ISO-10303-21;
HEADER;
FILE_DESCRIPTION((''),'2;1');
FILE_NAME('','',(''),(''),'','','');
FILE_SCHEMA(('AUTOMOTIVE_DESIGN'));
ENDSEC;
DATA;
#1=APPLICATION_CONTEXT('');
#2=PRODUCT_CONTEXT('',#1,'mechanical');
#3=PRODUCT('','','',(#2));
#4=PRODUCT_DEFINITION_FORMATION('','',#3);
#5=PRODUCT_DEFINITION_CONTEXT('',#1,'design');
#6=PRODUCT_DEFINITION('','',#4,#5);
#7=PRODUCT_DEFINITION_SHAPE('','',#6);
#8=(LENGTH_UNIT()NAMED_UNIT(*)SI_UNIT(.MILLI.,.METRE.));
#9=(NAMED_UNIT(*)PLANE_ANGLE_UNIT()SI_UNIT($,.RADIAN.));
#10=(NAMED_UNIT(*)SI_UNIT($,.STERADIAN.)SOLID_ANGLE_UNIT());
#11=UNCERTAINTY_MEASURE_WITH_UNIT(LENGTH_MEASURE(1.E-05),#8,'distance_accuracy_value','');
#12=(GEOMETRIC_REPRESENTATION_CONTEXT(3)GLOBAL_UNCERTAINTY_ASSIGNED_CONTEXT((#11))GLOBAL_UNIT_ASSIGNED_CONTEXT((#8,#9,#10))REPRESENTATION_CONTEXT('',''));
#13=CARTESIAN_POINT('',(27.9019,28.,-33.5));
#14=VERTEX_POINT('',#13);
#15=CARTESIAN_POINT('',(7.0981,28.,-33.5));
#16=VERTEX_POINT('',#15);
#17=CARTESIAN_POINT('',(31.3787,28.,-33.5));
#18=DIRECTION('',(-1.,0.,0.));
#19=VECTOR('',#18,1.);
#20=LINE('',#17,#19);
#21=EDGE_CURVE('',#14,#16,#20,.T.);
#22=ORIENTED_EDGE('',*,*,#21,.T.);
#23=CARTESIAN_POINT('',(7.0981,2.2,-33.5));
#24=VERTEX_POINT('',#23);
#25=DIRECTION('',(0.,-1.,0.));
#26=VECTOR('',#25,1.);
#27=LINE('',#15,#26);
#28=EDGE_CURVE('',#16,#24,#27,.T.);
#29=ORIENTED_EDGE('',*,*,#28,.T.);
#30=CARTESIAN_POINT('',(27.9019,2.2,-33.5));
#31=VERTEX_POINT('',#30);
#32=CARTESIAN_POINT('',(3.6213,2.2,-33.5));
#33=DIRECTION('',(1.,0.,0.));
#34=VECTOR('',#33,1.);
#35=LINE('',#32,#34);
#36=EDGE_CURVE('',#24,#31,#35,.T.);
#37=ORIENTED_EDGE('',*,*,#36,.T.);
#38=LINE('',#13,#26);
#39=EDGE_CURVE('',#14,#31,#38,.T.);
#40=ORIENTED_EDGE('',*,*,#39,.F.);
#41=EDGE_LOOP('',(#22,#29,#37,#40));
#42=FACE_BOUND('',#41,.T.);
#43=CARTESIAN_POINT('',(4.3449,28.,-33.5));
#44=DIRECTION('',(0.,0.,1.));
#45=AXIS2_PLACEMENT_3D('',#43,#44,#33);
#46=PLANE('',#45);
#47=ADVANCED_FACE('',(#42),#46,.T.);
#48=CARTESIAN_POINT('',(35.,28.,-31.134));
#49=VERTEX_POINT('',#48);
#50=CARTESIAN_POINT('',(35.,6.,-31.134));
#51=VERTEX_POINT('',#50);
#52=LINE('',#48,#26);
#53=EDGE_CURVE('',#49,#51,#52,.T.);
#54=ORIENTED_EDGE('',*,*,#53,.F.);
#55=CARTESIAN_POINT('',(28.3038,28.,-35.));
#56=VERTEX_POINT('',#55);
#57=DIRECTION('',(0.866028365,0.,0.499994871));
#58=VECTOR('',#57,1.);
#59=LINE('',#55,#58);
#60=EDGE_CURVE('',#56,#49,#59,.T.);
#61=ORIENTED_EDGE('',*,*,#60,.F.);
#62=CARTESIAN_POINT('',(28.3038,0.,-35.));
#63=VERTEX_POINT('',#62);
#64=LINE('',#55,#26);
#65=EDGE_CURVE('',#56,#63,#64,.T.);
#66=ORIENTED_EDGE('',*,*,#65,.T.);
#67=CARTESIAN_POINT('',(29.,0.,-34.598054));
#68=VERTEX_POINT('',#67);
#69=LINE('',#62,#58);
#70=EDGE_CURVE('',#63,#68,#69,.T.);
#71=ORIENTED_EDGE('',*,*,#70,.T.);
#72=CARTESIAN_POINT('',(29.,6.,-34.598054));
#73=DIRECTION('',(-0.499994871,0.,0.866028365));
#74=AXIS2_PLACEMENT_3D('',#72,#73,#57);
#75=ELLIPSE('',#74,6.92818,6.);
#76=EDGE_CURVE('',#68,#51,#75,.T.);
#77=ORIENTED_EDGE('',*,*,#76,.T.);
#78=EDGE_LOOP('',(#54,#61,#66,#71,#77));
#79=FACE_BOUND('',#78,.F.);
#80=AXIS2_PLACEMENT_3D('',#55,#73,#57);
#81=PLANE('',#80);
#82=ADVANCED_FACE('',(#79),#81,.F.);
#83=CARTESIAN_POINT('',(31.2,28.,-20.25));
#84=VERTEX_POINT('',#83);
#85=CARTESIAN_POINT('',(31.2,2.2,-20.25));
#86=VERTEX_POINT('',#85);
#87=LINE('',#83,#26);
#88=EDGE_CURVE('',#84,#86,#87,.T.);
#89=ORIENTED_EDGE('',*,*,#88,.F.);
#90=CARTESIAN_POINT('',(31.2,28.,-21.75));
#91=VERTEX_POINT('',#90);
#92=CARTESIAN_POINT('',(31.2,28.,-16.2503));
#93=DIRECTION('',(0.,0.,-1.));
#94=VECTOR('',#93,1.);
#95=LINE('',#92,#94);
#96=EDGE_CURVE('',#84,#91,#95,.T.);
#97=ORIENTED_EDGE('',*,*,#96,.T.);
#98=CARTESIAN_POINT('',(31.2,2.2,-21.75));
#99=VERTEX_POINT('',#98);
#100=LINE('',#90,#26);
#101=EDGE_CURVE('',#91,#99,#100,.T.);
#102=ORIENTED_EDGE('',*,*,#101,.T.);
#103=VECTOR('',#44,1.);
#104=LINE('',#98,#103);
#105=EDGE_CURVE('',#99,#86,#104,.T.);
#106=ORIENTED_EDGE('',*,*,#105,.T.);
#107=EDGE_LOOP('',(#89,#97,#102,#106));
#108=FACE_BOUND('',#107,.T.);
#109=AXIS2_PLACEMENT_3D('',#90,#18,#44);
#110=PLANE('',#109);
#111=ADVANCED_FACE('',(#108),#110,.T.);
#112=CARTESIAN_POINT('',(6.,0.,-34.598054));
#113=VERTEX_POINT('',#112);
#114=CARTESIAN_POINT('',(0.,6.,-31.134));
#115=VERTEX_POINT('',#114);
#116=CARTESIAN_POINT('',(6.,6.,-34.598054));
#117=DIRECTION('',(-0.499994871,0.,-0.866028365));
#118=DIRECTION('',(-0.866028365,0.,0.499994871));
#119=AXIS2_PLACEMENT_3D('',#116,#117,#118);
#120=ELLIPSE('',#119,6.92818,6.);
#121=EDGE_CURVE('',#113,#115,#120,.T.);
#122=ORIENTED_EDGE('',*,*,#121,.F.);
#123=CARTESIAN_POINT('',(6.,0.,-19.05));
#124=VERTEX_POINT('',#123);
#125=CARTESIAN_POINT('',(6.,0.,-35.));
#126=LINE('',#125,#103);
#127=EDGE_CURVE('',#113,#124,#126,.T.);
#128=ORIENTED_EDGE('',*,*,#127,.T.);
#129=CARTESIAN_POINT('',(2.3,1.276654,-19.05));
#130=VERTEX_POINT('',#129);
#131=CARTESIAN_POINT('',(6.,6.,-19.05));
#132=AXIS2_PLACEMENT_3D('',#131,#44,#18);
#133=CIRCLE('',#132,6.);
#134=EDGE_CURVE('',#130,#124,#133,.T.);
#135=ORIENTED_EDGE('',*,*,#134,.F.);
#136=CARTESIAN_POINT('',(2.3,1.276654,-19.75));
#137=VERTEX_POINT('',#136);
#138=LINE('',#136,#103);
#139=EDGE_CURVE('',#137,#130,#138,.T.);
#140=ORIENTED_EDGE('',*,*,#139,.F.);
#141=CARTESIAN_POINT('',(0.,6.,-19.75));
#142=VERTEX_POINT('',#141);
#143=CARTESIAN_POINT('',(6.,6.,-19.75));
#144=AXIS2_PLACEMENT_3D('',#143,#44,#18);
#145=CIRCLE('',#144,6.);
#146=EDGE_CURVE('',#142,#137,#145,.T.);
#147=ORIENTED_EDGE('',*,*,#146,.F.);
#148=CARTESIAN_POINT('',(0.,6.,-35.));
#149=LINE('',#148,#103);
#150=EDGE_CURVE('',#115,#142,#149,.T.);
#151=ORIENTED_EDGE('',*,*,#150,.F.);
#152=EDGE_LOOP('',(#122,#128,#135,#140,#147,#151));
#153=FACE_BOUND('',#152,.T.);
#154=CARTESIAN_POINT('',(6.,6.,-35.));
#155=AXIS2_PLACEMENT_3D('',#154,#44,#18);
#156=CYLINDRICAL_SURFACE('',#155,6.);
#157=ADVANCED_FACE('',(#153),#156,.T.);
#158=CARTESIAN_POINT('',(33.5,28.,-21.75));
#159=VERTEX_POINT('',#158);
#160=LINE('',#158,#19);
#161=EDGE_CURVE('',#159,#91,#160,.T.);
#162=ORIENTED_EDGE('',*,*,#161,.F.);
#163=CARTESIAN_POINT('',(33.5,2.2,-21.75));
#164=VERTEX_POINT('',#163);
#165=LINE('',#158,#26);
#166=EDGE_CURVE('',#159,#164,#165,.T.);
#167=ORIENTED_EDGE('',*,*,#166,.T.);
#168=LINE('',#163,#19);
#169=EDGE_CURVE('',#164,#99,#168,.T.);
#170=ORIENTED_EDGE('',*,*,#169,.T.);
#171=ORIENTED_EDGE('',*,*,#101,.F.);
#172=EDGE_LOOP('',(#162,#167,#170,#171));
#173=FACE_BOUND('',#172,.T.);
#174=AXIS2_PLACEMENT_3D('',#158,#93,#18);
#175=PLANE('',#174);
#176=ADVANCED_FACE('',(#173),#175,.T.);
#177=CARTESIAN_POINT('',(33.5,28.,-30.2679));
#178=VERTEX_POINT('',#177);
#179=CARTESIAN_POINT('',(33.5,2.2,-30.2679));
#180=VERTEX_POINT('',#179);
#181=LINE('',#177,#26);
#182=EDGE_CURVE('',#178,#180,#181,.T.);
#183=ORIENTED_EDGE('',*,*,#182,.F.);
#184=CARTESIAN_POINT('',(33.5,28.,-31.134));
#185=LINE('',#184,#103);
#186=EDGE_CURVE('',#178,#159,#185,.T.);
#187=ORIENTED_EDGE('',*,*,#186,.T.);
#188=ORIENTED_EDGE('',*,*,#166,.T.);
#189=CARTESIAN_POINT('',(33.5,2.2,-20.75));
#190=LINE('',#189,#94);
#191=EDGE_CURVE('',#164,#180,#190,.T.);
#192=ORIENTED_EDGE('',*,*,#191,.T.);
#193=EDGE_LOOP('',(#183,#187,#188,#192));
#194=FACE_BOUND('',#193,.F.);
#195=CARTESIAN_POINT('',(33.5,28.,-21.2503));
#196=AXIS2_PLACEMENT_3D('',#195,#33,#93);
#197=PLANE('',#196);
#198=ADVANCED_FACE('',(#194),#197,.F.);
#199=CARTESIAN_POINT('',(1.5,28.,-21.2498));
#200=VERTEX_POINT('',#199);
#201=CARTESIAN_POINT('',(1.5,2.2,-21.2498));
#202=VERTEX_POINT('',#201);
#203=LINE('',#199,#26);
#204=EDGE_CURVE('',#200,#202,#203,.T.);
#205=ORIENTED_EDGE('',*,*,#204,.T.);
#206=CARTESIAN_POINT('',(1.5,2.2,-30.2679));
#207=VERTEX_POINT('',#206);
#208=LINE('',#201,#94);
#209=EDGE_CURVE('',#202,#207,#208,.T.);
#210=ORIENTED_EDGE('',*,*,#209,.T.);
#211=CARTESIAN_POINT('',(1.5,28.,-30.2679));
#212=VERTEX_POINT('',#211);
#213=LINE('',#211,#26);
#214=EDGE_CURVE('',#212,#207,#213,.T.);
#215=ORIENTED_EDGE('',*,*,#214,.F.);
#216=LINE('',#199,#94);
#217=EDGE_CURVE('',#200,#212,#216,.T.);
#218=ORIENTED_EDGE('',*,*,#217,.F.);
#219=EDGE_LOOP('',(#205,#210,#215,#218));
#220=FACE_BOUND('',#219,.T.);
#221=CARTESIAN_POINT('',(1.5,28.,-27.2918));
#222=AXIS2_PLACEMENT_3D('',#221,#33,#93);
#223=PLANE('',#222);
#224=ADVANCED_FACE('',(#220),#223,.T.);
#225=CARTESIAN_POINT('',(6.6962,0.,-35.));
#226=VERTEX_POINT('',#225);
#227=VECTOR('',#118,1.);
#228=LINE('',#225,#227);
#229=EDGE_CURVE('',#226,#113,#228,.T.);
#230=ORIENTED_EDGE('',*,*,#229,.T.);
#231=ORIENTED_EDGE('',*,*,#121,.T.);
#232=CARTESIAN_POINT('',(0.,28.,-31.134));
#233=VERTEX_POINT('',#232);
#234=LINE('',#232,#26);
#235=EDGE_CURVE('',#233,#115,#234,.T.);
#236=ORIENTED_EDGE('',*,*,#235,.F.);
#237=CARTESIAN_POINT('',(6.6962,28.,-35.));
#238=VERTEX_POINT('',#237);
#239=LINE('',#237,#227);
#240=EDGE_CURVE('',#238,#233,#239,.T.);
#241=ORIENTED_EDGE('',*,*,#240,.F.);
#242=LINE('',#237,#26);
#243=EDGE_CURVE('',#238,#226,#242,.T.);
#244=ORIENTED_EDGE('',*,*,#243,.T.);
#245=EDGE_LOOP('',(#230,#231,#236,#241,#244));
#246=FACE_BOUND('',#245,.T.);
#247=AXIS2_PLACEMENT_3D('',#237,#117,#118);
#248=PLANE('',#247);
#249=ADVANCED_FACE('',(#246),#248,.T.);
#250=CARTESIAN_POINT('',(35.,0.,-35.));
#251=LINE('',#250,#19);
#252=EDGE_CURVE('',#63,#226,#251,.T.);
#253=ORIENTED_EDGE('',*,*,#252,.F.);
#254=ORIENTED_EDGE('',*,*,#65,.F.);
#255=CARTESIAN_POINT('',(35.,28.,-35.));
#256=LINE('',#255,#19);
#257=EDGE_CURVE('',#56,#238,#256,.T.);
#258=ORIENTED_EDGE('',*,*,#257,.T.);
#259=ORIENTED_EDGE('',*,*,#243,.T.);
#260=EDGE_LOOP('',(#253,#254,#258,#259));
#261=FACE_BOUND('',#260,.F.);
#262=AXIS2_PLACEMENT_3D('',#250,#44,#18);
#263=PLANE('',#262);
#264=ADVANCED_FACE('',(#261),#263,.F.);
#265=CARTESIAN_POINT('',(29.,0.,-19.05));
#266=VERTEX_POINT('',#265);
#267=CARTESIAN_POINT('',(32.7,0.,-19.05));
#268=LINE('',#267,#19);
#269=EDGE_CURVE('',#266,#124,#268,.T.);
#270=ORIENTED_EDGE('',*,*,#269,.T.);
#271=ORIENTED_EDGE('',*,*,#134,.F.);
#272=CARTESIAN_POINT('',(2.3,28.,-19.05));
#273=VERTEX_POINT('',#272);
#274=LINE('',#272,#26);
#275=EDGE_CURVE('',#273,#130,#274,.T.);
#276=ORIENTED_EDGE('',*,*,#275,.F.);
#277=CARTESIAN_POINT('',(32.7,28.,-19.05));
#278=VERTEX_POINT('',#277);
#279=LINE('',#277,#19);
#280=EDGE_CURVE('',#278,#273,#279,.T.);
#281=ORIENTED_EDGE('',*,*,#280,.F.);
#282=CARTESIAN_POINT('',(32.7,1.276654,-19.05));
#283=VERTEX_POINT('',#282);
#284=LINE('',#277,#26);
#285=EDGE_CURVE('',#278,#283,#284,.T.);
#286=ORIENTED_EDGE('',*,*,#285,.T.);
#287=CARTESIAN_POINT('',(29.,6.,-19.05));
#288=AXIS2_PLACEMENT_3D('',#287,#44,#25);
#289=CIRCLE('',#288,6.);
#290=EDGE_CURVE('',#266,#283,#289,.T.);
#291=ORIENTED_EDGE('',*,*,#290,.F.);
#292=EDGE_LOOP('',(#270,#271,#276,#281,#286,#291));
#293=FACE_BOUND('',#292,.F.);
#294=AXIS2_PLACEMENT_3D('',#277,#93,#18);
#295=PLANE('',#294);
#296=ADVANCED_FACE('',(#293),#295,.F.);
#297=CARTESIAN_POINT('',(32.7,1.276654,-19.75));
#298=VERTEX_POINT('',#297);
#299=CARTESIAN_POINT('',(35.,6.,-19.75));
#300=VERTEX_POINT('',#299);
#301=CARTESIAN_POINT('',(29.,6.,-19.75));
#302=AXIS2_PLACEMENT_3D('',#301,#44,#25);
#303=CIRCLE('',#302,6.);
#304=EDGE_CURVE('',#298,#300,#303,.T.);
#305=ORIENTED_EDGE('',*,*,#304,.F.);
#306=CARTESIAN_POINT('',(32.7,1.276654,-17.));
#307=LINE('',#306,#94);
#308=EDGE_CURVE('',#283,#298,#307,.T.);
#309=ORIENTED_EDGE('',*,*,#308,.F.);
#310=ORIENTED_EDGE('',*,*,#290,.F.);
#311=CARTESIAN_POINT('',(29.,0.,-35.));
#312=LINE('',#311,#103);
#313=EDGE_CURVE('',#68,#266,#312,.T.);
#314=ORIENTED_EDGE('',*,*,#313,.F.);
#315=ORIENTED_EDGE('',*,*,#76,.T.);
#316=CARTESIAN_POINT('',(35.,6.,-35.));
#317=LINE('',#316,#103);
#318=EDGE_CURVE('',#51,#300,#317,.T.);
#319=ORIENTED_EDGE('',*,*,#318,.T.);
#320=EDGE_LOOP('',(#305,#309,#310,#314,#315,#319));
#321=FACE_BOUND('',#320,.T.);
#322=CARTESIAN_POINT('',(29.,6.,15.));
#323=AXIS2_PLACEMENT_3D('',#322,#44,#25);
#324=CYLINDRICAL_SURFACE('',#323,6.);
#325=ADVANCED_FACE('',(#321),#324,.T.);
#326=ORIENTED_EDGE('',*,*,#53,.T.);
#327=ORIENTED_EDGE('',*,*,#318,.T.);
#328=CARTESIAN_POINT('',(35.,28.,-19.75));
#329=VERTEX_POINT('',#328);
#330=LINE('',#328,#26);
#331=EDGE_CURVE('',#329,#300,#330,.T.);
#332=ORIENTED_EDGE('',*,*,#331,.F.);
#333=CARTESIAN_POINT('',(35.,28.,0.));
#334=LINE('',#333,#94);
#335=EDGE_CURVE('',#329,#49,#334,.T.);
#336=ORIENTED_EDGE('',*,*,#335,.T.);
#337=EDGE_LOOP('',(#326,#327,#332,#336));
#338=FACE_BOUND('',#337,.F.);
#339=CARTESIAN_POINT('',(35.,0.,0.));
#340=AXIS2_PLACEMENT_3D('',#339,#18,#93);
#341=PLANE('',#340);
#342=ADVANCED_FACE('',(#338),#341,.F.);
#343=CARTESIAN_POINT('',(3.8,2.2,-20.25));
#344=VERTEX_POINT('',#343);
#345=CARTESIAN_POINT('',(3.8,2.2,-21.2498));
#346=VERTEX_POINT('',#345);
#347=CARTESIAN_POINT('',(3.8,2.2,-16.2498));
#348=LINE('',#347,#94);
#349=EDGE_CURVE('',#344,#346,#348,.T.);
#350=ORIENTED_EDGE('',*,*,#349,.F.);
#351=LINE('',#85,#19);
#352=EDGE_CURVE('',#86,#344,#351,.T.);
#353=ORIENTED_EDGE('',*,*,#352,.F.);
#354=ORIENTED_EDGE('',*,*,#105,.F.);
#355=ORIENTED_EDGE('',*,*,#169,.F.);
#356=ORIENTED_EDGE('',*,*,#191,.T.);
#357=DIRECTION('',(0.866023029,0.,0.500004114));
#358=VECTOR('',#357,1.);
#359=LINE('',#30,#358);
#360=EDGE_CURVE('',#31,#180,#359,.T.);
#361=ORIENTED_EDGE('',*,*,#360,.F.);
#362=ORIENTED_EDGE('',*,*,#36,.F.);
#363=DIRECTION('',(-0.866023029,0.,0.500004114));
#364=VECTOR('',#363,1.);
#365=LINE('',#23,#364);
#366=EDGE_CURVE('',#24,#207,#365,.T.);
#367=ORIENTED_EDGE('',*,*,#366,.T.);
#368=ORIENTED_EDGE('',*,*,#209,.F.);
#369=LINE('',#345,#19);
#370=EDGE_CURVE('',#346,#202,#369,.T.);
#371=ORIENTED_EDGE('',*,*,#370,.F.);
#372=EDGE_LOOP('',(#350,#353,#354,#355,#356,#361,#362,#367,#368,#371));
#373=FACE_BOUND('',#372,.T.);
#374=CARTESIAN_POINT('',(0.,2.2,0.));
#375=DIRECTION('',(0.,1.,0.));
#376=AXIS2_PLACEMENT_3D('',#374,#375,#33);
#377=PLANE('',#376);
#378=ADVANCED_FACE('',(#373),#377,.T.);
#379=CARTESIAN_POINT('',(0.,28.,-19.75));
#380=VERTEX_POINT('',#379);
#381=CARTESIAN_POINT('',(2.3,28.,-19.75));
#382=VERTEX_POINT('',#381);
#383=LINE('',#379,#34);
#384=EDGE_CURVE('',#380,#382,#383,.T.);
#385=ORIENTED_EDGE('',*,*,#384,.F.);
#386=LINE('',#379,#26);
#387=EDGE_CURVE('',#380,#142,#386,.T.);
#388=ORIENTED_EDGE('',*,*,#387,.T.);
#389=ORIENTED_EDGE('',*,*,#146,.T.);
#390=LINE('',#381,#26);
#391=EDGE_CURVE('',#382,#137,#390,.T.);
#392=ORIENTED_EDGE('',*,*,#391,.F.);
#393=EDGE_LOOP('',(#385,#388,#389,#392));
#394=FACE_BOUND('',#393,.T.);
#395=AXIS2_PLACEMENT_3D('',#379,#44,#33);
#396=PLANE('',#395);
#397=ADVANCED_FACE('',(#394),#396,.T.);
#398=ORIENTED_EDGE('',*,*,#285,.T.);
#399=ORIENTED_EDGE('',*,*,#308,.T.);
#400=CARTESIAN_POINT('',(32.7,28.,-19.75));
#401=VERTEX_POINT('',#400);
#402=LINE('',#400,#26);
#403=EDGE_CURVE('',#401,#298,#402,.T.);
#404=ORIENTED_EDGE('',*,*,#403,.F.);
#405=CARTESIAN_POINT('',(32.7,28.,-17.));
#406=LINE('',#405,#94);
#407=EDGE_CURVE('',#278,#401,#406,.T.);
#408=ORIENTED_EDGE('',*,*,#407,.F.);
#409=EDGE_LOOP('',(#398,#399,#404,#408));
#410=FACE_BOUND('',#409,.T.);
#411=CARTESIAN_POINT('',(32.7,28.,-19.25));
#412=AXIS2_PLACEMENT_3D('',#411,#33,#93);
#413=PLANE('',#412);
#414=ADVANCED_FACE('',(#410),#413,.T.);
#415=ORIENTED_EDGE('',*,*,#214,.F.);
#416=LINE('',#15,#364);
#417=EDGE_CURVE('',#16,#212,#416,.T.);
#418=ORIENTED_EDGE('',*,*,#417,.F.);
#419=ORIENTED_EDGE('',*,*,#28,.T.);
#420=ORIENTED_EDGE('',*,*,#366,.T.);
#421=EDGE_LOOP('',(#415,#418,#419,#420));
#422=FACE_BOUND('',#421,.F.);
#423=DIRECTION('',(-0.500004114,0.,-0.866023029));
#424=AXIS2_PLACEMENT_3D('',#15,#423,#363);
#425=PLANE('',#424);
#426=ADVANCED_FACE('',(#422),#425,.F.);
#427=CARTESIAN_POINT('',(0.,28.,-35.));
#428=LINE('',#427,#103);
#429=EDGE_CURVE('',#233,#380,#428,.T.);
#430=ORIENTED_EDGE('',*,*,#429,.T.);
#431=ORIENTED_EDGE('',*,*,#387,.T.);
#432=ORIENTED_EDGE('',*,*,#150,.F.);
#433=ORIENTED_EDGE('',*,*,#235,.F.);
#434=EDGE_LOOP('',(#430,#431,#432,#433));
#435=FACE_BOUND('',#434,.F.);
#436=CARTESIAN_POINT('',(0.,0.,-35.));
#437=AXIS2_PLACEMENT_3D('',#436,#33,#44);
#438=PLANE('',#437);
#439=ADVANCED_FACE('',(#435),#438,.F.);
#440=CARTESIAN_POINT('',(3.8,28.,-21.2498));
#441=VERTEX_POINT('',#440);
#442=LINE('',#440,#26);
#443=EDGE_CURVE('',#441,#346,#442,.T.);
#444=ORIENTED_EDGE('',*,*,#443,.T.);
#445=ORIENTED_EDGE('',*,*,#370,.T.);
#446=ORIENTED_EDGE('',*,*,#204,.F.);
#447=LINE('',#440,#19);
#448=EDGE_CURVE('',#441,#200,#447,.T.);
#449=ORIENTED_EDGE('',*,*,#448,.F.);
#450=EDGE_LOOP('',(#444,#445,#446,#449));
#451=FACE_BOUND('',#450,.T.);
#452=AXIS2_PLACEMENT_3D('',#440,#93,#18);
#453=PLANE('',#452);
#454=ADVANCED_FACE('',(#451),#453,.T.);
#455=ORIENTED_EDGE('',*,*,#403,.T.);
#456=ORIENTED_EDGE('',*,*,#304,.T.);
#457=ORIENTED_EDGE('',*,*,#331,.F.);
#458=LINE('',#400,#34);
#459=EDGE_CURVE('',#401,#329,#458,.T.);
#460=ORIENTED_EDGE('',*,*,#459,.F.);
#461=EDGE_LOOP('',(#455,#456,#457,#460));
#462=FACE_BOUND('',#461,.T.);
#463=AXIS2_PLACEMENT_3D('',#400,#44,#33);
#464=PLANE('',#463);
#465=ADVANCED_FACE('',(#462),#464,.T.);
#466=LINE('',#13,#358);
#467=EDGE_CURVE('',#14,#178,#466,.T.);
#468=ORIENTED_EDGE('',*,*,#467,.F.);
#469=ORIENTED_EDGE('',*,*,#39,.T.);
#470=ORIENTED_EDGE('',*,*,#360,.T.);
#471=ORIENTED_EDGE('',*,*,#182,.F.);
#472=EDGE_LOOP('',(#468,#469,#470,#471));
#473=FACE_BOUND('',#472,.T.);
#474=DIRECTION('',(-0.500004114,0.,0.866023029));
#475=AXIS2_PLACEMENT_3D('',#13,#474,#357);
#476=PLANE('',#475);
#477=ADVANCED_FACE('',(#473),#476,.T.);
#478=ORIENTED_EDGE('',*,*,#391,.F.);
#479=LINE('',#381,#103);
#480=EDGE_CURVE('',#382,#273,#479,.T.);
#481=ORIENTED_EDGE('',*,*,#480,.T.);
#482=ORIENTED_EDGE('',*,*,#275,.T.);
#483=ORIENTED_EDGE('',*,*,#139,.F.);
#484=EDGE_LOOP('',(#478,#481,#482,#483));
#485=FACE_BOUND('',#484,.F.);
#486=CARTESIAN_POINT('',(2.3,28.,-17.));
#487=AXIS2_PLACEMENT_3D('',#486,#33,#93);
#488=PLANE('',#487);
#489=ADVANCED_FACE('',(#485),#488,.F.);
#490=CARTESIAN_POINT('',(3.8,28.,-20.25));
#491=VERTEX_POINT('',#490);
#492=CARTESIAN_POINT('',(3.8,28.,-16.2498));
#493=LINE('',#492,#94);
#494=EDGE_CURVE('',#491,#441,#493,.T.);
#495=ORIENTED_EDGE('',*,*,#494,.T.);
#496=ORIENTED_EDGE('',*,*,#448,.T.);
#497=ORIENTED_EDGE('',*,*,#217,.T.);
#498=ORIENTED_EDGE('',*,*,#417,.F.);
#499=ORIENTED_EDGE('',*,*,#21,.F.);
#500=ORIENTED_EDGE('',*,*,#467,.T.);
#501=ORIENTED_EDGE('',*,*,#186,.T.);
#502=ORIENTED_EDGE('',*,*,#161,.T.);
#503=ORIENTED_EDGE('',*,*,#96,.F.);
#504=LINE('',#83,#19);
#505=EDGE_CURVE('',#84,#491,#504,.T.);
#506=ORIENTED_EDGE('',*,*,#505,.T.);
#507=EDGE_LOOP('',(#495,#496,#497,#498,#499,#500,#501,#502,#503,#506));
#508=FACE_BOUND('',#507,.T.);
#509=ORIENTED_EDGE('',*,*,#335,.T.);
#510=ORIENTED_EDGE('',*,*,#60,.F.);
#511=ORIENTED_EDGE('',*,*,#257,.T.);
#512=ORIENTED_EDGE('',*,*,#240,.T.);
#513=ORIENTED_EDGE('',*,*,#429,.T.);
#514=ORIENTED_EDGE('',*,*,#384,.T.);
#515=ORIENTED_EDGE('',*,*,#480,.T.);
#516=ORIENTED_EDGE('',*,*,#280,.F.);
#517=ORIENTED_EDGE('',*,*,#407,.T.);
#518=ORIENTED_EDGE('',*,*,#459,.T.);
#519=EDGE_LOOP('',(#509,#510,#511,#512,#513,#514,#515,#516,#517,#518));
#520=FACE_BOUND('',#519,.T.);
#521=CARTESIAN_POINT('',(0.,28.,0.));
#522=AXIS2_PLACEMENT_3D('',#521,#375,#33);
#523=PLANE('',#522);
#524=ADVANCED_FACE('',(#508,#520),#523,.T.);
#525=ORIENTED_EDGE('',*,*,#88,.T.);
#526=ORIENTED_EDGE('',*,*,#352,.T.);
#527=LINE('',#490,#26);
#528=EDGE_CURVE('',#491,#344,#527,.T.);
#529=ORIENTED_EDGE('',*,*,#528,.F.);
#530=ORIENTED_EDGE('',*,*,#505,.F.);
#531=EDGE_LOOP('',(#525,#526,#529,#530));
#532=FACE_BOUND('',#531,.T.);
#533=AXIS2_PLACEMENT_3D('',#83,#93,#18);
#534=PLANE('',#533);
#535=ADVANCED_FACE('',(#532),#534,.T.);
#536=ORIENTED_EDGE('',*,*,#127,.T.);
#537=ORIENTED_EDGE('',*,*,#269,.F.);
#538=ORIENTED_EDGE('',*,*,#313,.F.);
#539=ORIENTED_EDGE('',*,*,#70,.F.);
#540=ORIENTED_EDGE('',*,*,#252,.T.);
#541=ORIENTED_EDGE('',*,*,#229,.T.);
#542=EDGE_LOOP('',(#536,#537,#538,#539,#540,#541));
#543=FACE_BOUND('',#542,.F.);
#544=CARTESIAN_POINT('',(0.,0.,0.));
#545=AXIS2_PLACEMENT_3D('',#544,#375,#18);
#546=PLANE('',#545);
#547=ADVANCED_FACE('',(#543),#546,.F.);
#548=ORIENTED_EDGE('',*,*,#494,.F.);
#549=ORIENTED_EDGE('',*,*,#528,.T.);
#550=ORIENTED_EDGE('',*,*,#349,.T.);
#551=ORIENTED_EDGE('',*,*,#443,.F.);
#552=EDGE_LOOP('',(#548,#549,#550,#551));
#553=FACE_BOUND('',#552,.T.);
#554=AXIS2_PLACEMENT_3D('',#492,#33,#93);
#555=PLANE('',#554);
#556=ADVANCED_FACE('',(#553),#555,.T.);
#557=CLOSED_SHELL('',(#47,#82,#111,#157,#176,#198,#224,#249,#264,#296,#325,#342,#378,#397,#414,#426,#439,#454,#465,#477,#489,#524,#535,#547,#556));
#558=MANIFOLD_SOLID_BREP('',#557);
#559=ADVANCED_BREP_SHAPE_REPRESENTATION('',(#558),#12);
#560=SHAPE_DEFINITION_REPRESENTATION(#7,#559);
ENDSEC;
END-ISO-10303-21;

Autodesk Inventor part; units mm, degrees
ref_plane "YZ Plane" through (0, 0, 0) normal (1, 0, 0) x (0, 1, 0)
ref_plane "XZ Plane" through (0, 0, 0) normal (0, 1, 0) x (-1, 0, 0)
ref_plane "XY Plane" through (0, 0, 0) normal (0, 0, 1) x (1, 0, 0)
sketch "Sketch1" plane through (0, 0, 0) normal (0, 1, 0) x (-1, 0, 0)
  line L0 (0, 0) -> (-35, 0)
  line L1 (-35, 0) -> (-35, -35)
  line L2 (-35, -35) -> (0, -35)
  line L3 (0, -35) -> (0, 0)
  dimension "d0" = 35
  dimension "d1" = 35
extrude "Extrusion1" add sketch "Sketch1" along normal blind 28
sketch "Sketch2" plane through (0, 28, 0) normal (0, 1, 0) x (1, 0, 0)
  line L0 (35, 19) -> (32.7, 19)
  line L1 (32.7, 19) -> (32.7, 17)
  line L2 (35, 19) -> (35, 17.125)
  line L3 (32.7, 17) -> (35, 17)
  line L4 (35, 17) -> (35, 17.125)
  point P0 (0, 0)
  point P1 (35, 35)
  dimension "d6" = 16
  dimension "d7" = 2.3
  dimension "d8" = 2
extrude "Extrusion2" cut sketch "Sketch2" against normal blind 28
pattern_linear "Rectangular Pattern1" count 2 spacing 32.7 along (-1, 0, 0) of "Extrusion2"
fillet "Fillet1" radius 6 2 edges at (35, 0, -8.5) (35, 0, -27)
fillet "Fillet2" radius 6 1 edges at (0, 0, -27)
sketch "Sketch3" plane through (0, 28, 0) normal (0, 1, 0) x (1, 0, 0)
  line L0 (6, 0) -> (0, 0) projected
  line L1 (0, 0) -> (0, 3)
  line L2 (0, 17) -> (0, 0) projected
  line L3 (0, 0) -> (3, 0)
  line L4 (0, 3) -> (3, 0)
  dimension "d16" = 3
extrude "Extrusion3" cut sketch "Sketch3" against normal blind 28
sketch "Sketch4" plane through (0, 28, 0) normal (0, 1, 0) x (1, 0, 0)
  line L0 (0, 19) -> (0, 35) projected
  line L1 (0, 35) -> (0, 32)
  line L2 (0, 35) -> (6, 35) projected
  line L3 (0, 35) -> (3, 35)
  line L4 (3, 35) -> (0, 32)
  point P0 (0, 0)
  dimension "d19" = 3
  dimension "d20" = 3
extrude "Extrusion4" cut sketch "Sketch4" against normal blind 28
sketch "Sketch5" plane through (0, 28, 0) normal (0, 1, 0) x (1, 0, 0)
  line L0 (35, 0) -> (35, 17) projected
  line L1 (35, 0) -> (32, 0)
  line L2 (3, 0) -> (35, 0) projected
  line L3 (35, 0) -> (35, 3)
  line L4 (35, 3) -> (32, 0)
  line L5 (29, 35) -> (35, 35) projected
  line L6 (35, 35) -> (35, 32)
  line L7 (35, 19) -> (35, 35) projected
  line L8 (35, 32) -> (32, 35)
  line L9 (32, 35) -> (35, 35)
  point P0 (0, 0)
  dimension "d23" = 3
  dimension "d24" = 3
  dimension "d25" = 3
extrude "Extrusion5" cut sketch "Sketch5" against normal blind 28
sketch "Sketch6" plane through (0, 28, 0) normal (0, 1, 0) x (1, 0, 0)
  line L0 (3, 0) -> (0, 3) projected
  line L1 (2.3, 17) -> (0, 17) projected
  line L2 (2, 15.75) -> (4.3, 15.75)
  line L3 (4.3, 15.75) -> (4.3, 21.75)
  line L4 (4.3, 21.75) -> (2, 21.75)
  line L5 (0, 19) -> (0, 32) projected
  line L6 (2, 21.75) -> (2, 30.75)
  line L7 (0, 3) -> (0, 5)
  line L8 (0, 17) -> (0, 3) projected
  line L9 (2, 5) -> (2, 15.75)
  line L10 (32, 35) -> (3, 35) projected
  line L11 (3, 35) -> (5, 35)
  line L12 (6, 0) -> (3, 0) projected
  line L13 (3, 0) -> (5, 0)
  line L14 (2.827, 3) -> (2, 3.8818)
  line L15 (2, 3.8818) -> (2, 5)
  line L16 (2.827, 3) -> (3.827, 2)
  line L17 (2.827, 3) -> (4.2412, 3) construction
  line L18 (1.743, 34.4232) -> (3.15, 33.0019)
  line L19 (3.15, 33.0019) -> (2, 31.8635)
  line L20 (2, 31.8635) -> (2, 30.75)
  line L21 (3.15, 33.0019) -> (4.0351, 33.5429)
  line L22 (4.0351, 33.5429) -> (30.1293, 33.5429)
  line L23 (35, 32) -> (32, 35) projected
  line L24 (32.0858, 32.8358) -> (31.3787, 33.5429)
  line L25 (31.3787, 33.5429) -> (30.1293, 33.5429)
  line L26 (35, 19) -> (35, 32) projected
  line L27 (33, 26.25) -> (33, 31.9216)
  line L28 (33, 31.9216) -> (32.0858, 32.8358)
  line L29 (33, 26.25) -> (33, 21.75)
  line L30 (35, 19) -> (32.7, 19) projected
  line L31 (33, 21.75) -> (30.7, 21.75)
  line L32 (30.7, 21.75) -> (30.7, 15.75)
  line L33 (30.7, 15.75) -> (33, 15.75)
  line L34 (33, 15.75) -> (33, 7.3052)
  line L35 (32, 0) -> (35, 3) projected
  line L36 (33.85, 1.85) -> (35.85, 1.85) construction
  line L37 (32.4358, 3.2642) -> (33, 3.8284)
  line L38 (33, 3.8284) -> (33, 7.3052)
  line L39 (27.667, 2) -> (31.1716, 2)
  line L40 (31.1716, 2) -> (32.4358, 3.2642)
  line L41 (27.667, 2) -> (3.827, 2)
  point P0 (0, 0)
  dimension "d31" = 2.3
  dimension "d32" = 6
  dimension "d33" = 2.3
  dimension "d34" = 9
  dimension "d35" = 2
  dimension "d36" = 2
  dimension "d37" = 2
  dimension "d42" = 45
  dimension "d43" = 2
  dimension "d48" = 4.5
  dimension "d49" = 2.3
  dimension "d50" = 6
  dimension "d51" = 2.3
  dimension "d52" = 2
extrude "Extrusion6" cut sketch "Sketch6" against normal blind 25.8
sketch "Sketch7" plane through (0, 28, 0) normal (0, 1, 0) x (1, 0, 0)
  line L0 (23.4542, 2) -> (23.9542, 2) construction
  line L1 (32.0858, 2.9142) -> (32.5858, 2.9142) construction
  line L2 (35, 32) -> (32, 35) projected
  line L3 (31.3787, 33.5429) -> (33, 31.9216) projected
  line L4 (2, 31.8635) -> (3.15, 33.0019) projected
  line L5 (2.8776, 32.7322) -> (3.3776, 32.7322) construction
  line L6 (32.4393, 2.5607) -> (31.3787, 1.5)
  line L7 (31.3787, 1.5) -> (23.4542, 1.5)
  line L8 (2.7741, 2.5108) -> (3.7848, 1.5)
  line L9 (3.7848, 1.5) -> (23.4542, 1.5)
  line L10 (2.7741, 2.5108) -> (1.5, 3.7848)
  line L11 (1.5, 3.7848) -> (1.5, 16.2498)
  line L12 (1.5, 16.2498) -> (3.8, 16.2498)
  line L13 (3.8, 16.2498) -> (3.8, 21.2498)
  line L14 (4.3, 21.75) -> (2, 21.75) projected
  line L15 (3.8, 21.2498) -> (1.5, 21.2498)
  line L16 (1.5, 21.2498) -> (1.5, 27.2918)
  line L17 (1.5, 27.2918) -> (1.5, 32.0617)
  line L18 (1.5, 32.0617) -> (2.5241, 33.0858)
  line L19 (2.5241, 33.0858) -> (3.4812, 34.0429)
  line L20 (3.4812, 34.0429) -> (18.3245, 34.0429)
  line L21 (18.3245, 34.0429) -> (31.5858, 34.0429)
  line L22 (31.5858, 34.0429) -> (32.5429, 33.0858)
  line L23 (32.4393, 2.5607) -> (33.5, 3.6213)
  line L24 (33.5, 3.6213) -> (33.5, 11.0333)
  line L25 (33.5, 11.0333) -> (33.5, 16.2503)
  line L26 (33.5, 16.2503) -> (31.2, 16.2503)
  line L27 (30.7, 21.75) -> (30.7, 15.75) projected
  line L28 (31.2, 16.2503) -> (31.2, 21.2503)
  line L29 (31.2, 21.2503) -> (33.5, 21.2503)
  line L30 (33.5, 21.2503) -> (33.5, 32.1287)
  line L31 (33.5, 32.1287) -> (32.5429, 33.0858)
  line L32 (4.0351, 33.5429) -> (31.3787, 33.5429) projected
  line L33 (4.0351, 33.5429) -> (31.3787, 33.5429)
  line L34 (33, 31.9216) -> (33, 21.75) projected
  line L35 (31.3787, 33.5429) -> (33, 31.9216)
  line L36 (33, 31.9216) -> (33, 21.75)
  line L37 (33, 21.75) -> (30.7, 21.75) projected
  line L38 (33, 21.75) -> (30.7, 21.75)
  line L39 (30.7, 21.75) -> (30.7, 15.75)
  line L40 (30.7, 15.75) -> (33, 15.75) projected
  line L41 (31.1716, 2) -> (3.827, 2)
  line L42 (3.827, 2) -> (2.827, 3) projected
  line L43 (2, 3.8818) -> (2, 15.75) projected
  line L44 (3.827, 2) -> (2, 3.8818)
  line L45 (2, 3.8818) -> (2, 15.75)
  line L46 (2, 15.75) -> (4.3, 15.75) projected
  line L47 (2, 15.75) -> (4.3, 15.75)
  line L48 (4.3, 15.75) -> (4.3, 21.75) projected
  line L49 (4.3, 15.75) -> (4.3, 21.75)
  line L50 (4.3, 21.75) -> (2, 21.75)
  line L51 (2, 21.75) -> (2, 31.8635) projected
  line L52 (2, 21.75) -> (2, 31.8635)
  line L53 (3.15, 33.0019) -> (4.0351, 33.5429) projected
  line L54 (2, 31.8635) -> (3.15, 33.0019)
  line L55 (33, 3.8284) -> (31.1716, 2) projected
  line L56 (31.1716, 2) -> (33, 3.8284)
  line L57 (33, 3.8284) -> (33, 15.75)
  line L58 (30.7, 15.75) -> (33, 15.75)
  point P0 (0, 0)
  dimension "d65" = 0.5
  dimension "d70" = 12.465
  dimension "d71" = 2.3
  dimension "d72" = 5
  dimension "d73" = 90
  dimension "d74" = 2.3
  dimension "d76" = 2.3
  dimension "d77" = 5
  dimension "d78" = 2.3
extrude "Extrusion7" cut sketch "Sketch7" against normal blind 25.8
sketch "Sketch8" plane through (0, 28, 0) normal (0, 1, 0) x (1, 0, 0)
  line L0 (32, 35) -> (35, 32) projected
  line L1 (33.2498, 33.7502) -> (34.7498, 33.7502) construction
  line L2 (29, 35) -> (32, 35) projected
  line L3 (28.3787, 33.5) -> (31.3787, 33.5)
  line L4 (31.3787, 33.5) -> (32.1892, 32.6895)
  line L5 (33.5, 32.1287) -> (33.5, 21.2503) projected
  line L6 (33.5, 31.3787) -> (32.1892, 32.6895)
  line L7 (33.5, 31.3787) -> (33.5, 32.1287)
  line L8 (31.5858, 34.0429) -> (33.5, 32.1287) projected
  line L9 (33.5, 32.1287) -> (31.5858, 34.0429)
  line L10 (3.4812, 34.0429) -> (31.5858, 34.0429) projected
  line L11 (31.5858, 34.0429) -> (3.4812, 34.0429)
  line L12 (1.5, 32.0617) -> (3.4812, 34.0429) projected
  line L13 (3.4812, 34.0429) -> (1.5, 32.0617)
  line L14 (3, 35) -> (0, 32) projected
  line L15 (1.7099, 33.7099) -> (3.2099, 33.7099) construction
  line L16 (2.7705, 32.6492) -> (1.5, 31.3787)
  line L17 (1.5, 21.2498) -> (1.5, 32.0617) projected
  line L18 (4.3449, 35) -> (5.8449, 35) construction
  line L19 (4.3449, 33.5) -> (3.6213, 33.5)
  line L20 (3.6213, 33.5) -> (2.7705, 32.6492)
  line L21 (1.5, 31.3787) -> (1.5, 32.0617)
  line L22 (4.3449, 33.5) -> (28.3787, 33.5)
  point P0 (0, 0)
  dimension "d83" = 1.5
  dimension "d87" = 1.5
  dimension "d89" = 1.5
extrude "Extrusion8" add sketch "Sketch8" against normal blind 25.8
sketch "Sketch9" plane through (0, 28, 0) normal (0, 1, 0) x (1, 0, 0)
  line L0 (0, 3) -> (3, 0) projected
  line L1 (0, 3) -> (5.1962, 0)
  line L2 (3, 0) -> (32, 0) projected
  line L3 (0, 3) -> (6, 3) construction
  line L4 (5.1962, 0) -> (3, 0)
  line L5 (3, 0) -> (0, 3)
  line L6 (35, 17) -> (35, 3) projected
  line L7 (35, 3) -> (29.8038, 0)
  line L8 (32, 0) -> (29, 0) projected
  line L9 (35, 3) -> (41, 3) construction
  line L10 (29.8038, 0) -> (32, 0)
  line L11 (32, 0) -> (35, 3)
  line L12 (35, 19) -> (35, 32) projected
  line L13 (35, 32) -> (29.8038, 35)
  line L14 (29, 35) -> (32, 35) projected
  line L15 (35, 32) -> (41, 32) construction
  line L16 (29.8038, 35) -> (32, 35)
  line L17 (32, 35) -> (35, 32)
  line L18 (0, 19) -> (0, 32) projected
  line L19 (0, 32) -> (5.1962, 35)
  line L20 (3, 35) -> (6, 35) projected
  line L21 (0, 32) -> (6, 32) construction
  line L22 (5.1962, 35) -> (3, 35)
  line L23 (3, 35) -> (0, 32)
  line L24 (0, 32) -> (3, 35) projected
  point P0 (0, 0)
  dimension "d93" = 30
  dimension "d94" = 150
  dimension "d95" = 150
  dimension "d96" = 30
extrude "Extrusion9" cut sketch "Sketch9" against normal blind 28
sketch "Sketch10" plane through (0, 28, 0) normal (0, 1, 0) x (1, 0, 0)
  line L0 (1.5, 3.7848) -> (1.5, 16.2498) projected
  line L1 (1.5, 3.7848) -> (5.4575, 1.5)
  line L2 (31.3787, 1.5) -> (3.7848, 1.5) projected
  line L3 (1.5, 3.7848) -> (6.0697, 3.7848) construction
  line L4 (5.4575, 1.5) -> (3.7848, 1.5)
  line L5 (3.7848, 1.5) -> (1.5, 3.7848) projected
  line L6 (3.7848, 1.5) -> (1.5, 3.7848)
  line L7 (33.5, 16.2503) -> (33.5, 3.6213) projected
  line L8 (33.5, 3.6213) -> (29.8258, 1.5)
  line L9 (33.5, 3.6213) -> (37.7426, 3.6213) construction
  line L10 (33.5, 3.6213) -> (31.3787, 1.5) projected
  line L11 (29.8258, 1.5) -> (31.3787, 1.5)
  line L12 (31.3787, 1.5) -> (33.5, 3.6213)
  line L13 (33.5, 31.3787) -> (33.5, 21.2503) projected
  line L14 (33.5, 31.3787) -> (29.8258, 33.5)
  line L15 (3.6213, 33.5) -> (31.3787, 33.5) projected
  line L16 (33.5, 31.3787) -> (37.7426, 31.3787) construction
  line L17 (29.8258, 33.5) -> (31.3787, 33.5)
  line L18 (31.3787, 33.5) -> (33.5, 31.3787)
  line L19 (1.5, 31.3787) -> (3.6213, 33.5) projected
  line L20 (1.5, 31.3787) -> (5.1742, 33.5)
  line L21 (1.5, 31.3787) -> (5.7426, 31.3787) construction
  line L22 (5.1742, 33.5) -> (3.6213, 33.5)
  line L23 (3.6213, 33.5) -> (1.5, 31.3787)
  point P0 (0, 0)
  dimension "d99" = 30
  dimension "d100" = 150
  dimension "d101" = 150
  dimension "d102" = 30
extrude "Extrusion10" add sketch "Sketch10" against normal blind 25.8
sketch "Sketch11" plane through (0, 28, 0) normal (0, 1, 0) x (1, 0, 0)
  line L0 (0, 3) -> (5.1962, 0) projected
  line L1 (3.036, 1.2472) -> (4.536, 1.2472) construction
  line L2 (3.786, 2.5462) -> (1.5, 3.866)
  line L3 (1.5, 3.7848) -> (5.4575, 1.5) projected
  line L4 (1.5, 3.866) -> (1.5, 3.7848)
  line L5 (1.5, 3.7848) -> (5.4575, 1.5)
  line L6 (5.4575, 1.5) -> (5.5981, 1.5)
  line L7 (29.8258, 1.5) -> (5.4575, 1.5) projected
  line L8 (5.5981, 1.5) -> (3.786, 2.5462)
  line L9 (29.5815, 1.5) -> (29.8258, 1.5)
  line L10 (33.5, 3.6213) -> (29.8258, 1.5) projected
  line L11 (29.8258, 1.5) -> (33.5, 3.6213)
  line L12 (29.8038, 0) -> (35, 3) projected
  line L13 (32.0253, 1.2826) -> (33.5253, 1.2826) construction
  line L14 (31.2753, 2.5816) -> (33.5, 3.866)
  line L15 (33.5, 16.2503) -> (33.5, 3.6213) projected
  line L16 (33.5, 3.866) -> (33.5, 3.6213)
  line L17 (31.2753, 2.5816) -> (29.4019, 1.5)
  line L18 (29.5815, 1.5) -> (29.4019, 1.5)
  line L19 (29.8038, 35) -> (35, 32) projected
  line L20 (29.8258, 33.5) -> (33.5, 31.3787) projected
  line L21 (32.0253, 33.7174) -> (33.5253, 33.7174) construction
  line L22 (31.2753, 32.4184) -> (29.4019, 33.5)
  line L23 (29.8258, 33.5) -> (5.1742, 33.5) projected
  line L24 (29.8258, 33.5) -> (29.4019, 33.5)
  line L25 (29.8258, 33.5) -> (33.5, 31.3787)
  line L26 (33.5, 31.3787) -> (33.5, 31.134)
  line L27 (33.5, 31.3787) -> (33.5, 21.2503) projected
  line L28 (31.2753, 32.4184) -> (33.5, 31.134)
  line L29 (5.1962, 35) -> (0, 32) projected
  line L30 (2.5981, 33.5) -> (4.0981, 33.5) construction
  line L31 (3.3481, 32.201) -> (1.606, 31.1952)
  line L32 (1.5, 21.2498) -> (1.5, 31.3787) projected
  line L33 (5.1742, 33.5) -> (1.5, 31.3787) projected
  line L34 (1.5, 31.3787) -> (5.1742, 33.5)
  line L35 (5.1742, 33.5) -> (5.5981, 33.5)
  line L36 (3.3481, 32.201) -> (5.5981, 33.5)
  line L37 (1.606, 31.1952) -> (1.5, 31.134)
  line L38 (1.5, 31.3787) -> (1.5, 31.134)
  point P0 (0, 0)
  dimension "d105" = 1.5
  dimension "d109" = 1.5
  dimension "d111" = 1.5
  dimension "d113" = 1.5
extrude "Extrusion11" add sketch "Sketch11" against normal blind 25.8
sketch "Sketch12" plane through (0, 28, 0) normal (0, 1, 0) x (1, 0, 0)
  line L0 (32.7, 19) -> (32.95, 19) construction
  line L1 (35, 19) -> (35, 32) projected
  line L2 (32.7, 19) -> (32.7, 17) projected
  line L3 (32.7, 19.25) -> (34.2, 19.25) construction
  line L4 (32.7, 20.75) -> (31.2, 20.75)
  line L5 (31.2, 21.2503) -> (31.2, 16.2503) projected
  line L6 (33.5, 21.2503) -> (31.2, 21.2503) projected
  line L7 (31.2, 21.2503) -> (31.2, 20.75)
  line L8 (33.5, 31.134) -> (33.5, 21.2503) projected
  line L9 (31.2, 21.2503) -> (33.5, 21.2503)
  line L10 (33.5, 21.2503) -> (33.5, 20.75)
  line L11 (33.5, 20.75) -> (32.7, 20.75)
  point P0 (0, 0)
  dimension "d117" = 0.25
  dimension "d119" = 1.5
extrude "Extrusion12" cut sketch "Sketch12" against normal blind 25.8
sketch "Sketch13" plane through (0, 28, 0) normal (0, 1, 0) x (1, 0, 0)
  line L0 (32.7, 19) -> (35, 19) projected
  line L1 (32.7, 19) -> (32.7, 19.25)
  line L2 (32.7, 19.25) -> (35, 19.25)
  line L3 (35, 19.25) -> (35, 19)
  line L4 (32.7, 17) -> (32.7, 19) projected
  line L5 (35, 19) -> (32.7, 19)
  point P0 (0, 0)
  dimension "d123" = 0.25
extrude "Extrusion13" cut sketch "Sketch13" against normal blind 28
sketch "Sketch14" plane through (0, 28, 0) normal (0, 1, 0) x (1, 0, 0)
  line L0 (32.7, 19.25) -> (35, 19.25) projected
  line L1 (32.7, 19.25) -> (32.7, 19.75)
  line L2 (32.7, 19.75) -> (35, 19.75)
  line L3 (35, 19.25) -> (35, 32) projected
  line L4 (35, 19.75) -> (35, 19.25)
  line L5 (32.7, 17) -> (32.7, 19.25) projected
  line L6 (35, 19.25) -> (32.7, 19.25)
  line L7 (0, 19) -> (2.3, 19) projected
  line L8 (0, 19) -> (0, 19.75)
  line L9 (0, 32) -> (0, 19) projected
  line L10 (0, 19.75) -> (2.3, 19.75)
  line L11 (2.3, 19) -> (2.3, 17) projected
  line L12 (2.3, 19.75) -> (2.3, 19)
  line L13 (2.3, 19) -> (0, 19)
  point P0 (0, 0)
  dimension "d129" = 0.5
  dimension "d130" = 0.75
extrude "Extrusion14" cut sketch "Sketch14" against normal blind 28
sketch "Sketch15" plane through (0, 28, 0) normal (0, 1, 0) x (1, 0, 0)
  line L0 (0, 19.75) -> (2.3, 19.75) projected
  line L1 (1.15, 17.75) -> (0, 17.75)
  line L2 (0, 17) -> (2.3, 17) projected
  line L3 (0, 17.75) -> (0, 17)
  line L4 (0, 17) -> (2.3, 17)
  line L5 (2.3, 19.75) -> (2.3, 17) projected
  line L6 (1.15, 17.75) -> (2.3, 17.75)
  line L7 (33.2558, 17.75) -> (32.7, 17.75)
  line L8 (32.7, 17) -> (35, 17)
  line L9 (35, 17) -> (35, 17.75)
  line L10 (35, 17.75) -> (33.2558, 17.75)
  line L11 (32.7, 17.75) -> (2.3, 17.75)
  line L12 (2.3, 17) -> (32.7, 17)
  point P0 (0, 0)
extrude "Extrusion15" add sketch "Sketch15" against normal blind 28
fillet "Fillet5" radius 6 2 edges at (35, 0, -17.375) (0, 0, -17.375)
sketch "Sketch16" plane through (0, 28, 0) normal (0, 1, 0) x (1, 0, 0)
  line L0 (3.8, 16.2498) -> (3.8, 17) projected
  line L1 (31.2, 17.75) -> (3.8, 17.75) projected
  line L2 (3.8, 17) -> (31.2, 17)
  line L3 (31.2, 17) -> (31.2, 17.75)
  line L4 (31.2, 17.75) -> (3.8, 17.75)
  line L5 (3.8, 17.75) -> (3.8, 17)
  point P0 (0, 0)
extrude "Extrusion16" cut sketch "Sketch16" against normal blind 25.8
sketch "Sketch17" plane through (0, 28, 0) normal (0, 1, 0) x (1, 0, 0)
  line L0 (33.5, 20.75) -> (31.2, 20.75) projected
  line L1 (33.5, 31.134) -> (33.5, 20.75) projected
  line L2 (31.2, 20.75) -> (33.5, 20.75)
  line L3 (33.5, 20.75) -> (33.5, 21.75)
  line L4 (33.5, 21.75) -> (31.2, 21.75)
  line L5 (31.2, 21.75) -> (31.2, 20.75)
  point P0 (0, 0)
  dimension "d144" = 1
extrude "Extrusion17" add sketch "Sketch17" against normal blind 25.8
sketch "Sketch18" plane through (0, 28, 0) normal (0, 1, 0) x (1, 0, 0)
  line L0 (31.2, 21.75) -> (31.2, 16.2503) projected
  line L1 (31.2, 18.25) -> (31.2, 19.25)
  line L2 (3.8, 16.2498) -> (3.8, 21.2498) projected
  line L3 (3.8, 18.25) -> (3.8, 19.25)
  line L4 (3.8, 19.25) -> (31.2, 19.25)
  line L5 (31.2, 18.25) -> (3.8, 18.25)
  point P0 (0, 0)
  point P1 (2.3, 17.75)
  dimension "d148" = 1
extrude "Extrusion18" add sketch "Sketch18" against normal blind 25.8
sketch "Sketch19" plane through (0, 28, 0) normal (0, 1, 0) x (1, 0, 0)
  line L0 (3.8, 18.25) -> (0, 18.25)
  line L1 (0, 18.25) -> (0, 0)
  line L2 (0, 0) -> (35, 0)
  line L3 (35, 0) -> (35, 18.25)
  line L4 (35, 17.75) -> (35, 3) projected
  line L5 (35, 18.25) -> (3.8, 18.25)
extrude "Extrusion19" cut sketch "Sketch19" against normal blind 28
sketch "Sketch20" plane through (0, 28, 0) normal (0, 1, 0) x (1, 0, 0)
  line L0 (3.8, 19.25) -> (3.8, 21.2498) projected
  line L1 (31.2, 21.75) -> (31.2, 19.25) projected
  line L2 (3.8, 19.25) -> (31.2, 19.25)
  line L3 (31.2, 19.25) -> (31.2, 19.75)
  line L4 (31.2, 19.75) -> (3.8, 19.75)
  line L5 (3.8, 19.75) -> (3.8, 19.25)
  point P0 (0, 0)
  dimension "d153" = 0.5
extrude "Extrusion20" add sketch "Sketch20" against normal blind 25.8
sketch "Sketch21" plane through (0, 28, 0) normal (0, 1, 0) x (1, 0, 0)
  line L0 (2.3, 18.25) -> (32.7, 18.25) projected
  line L1 (32.7, 19.75) -> (32.7, 18.25) projected
  line L2 (2.3, 18.25) -> (32.7, 18.25)
  line L3 (32.7, 18.25) -> (32.7, 18.75)
  line L4 (32.7, 18.75) -> (2.3, 18.75)
  line L5 (2.3, 18.75) -> (2.3, 18.25)
  point P0 (0, 0)
  dimension "d156" = 0.5
extrude "Extrusion21" cut sketch "Sketch21" against normal blind 28
sketch "Sketch22" plane through (0, 28, 0) normal (0, 1, 0) x (1, 0, 0)
  line L0 (31.2, 19.75) -> (3.8, 19.75) projected
  line L1 (31.2, 21.75) -> (31.2, 19.75) projected
  line L2 (3.8, 19.75) -> (31.2, 19.75)
  line L3 (31.2, 19.75) -> (31.2, 20.25)
  line L4 (31.2, 20.25) -> (3.8, 20.25)
  line L5 (3.8, 20.25) -> (3.8, 19.75)
  point P0 (0, 0)
  dimension "d159" = 0.5
extrude "Extrusion22" add sketch "Sketch22" against normal blind 25.8
sketch "Sketch23" plane through (0, 28, 0) normal (0, 1, 0) x (1, 0, 0)
  line L0 (29.8038, 35) -> (5.1962, 35) projected
  line L1 (5.1962, 35) -> (6.6962, 35)
  line L2 (6.6962, 35) -> (0, 31.134)
  line L3 (0, 19.75) -> (0, 32) projected
  line L4 (0, 31.134) -> (0, 32)
  line L5 (0, 32) -> (5.1962, 35)
  line L6 (29.8038, 35) -> (28.3038, 35)
  line L7 (28.3038, 35) -> (35, 31.134)
  line L8 (35, 19.75) -> (35, 32) projected
  line L9 (35, 31.134) -> (35, 32)
  line L10 (35, 32) -> (29.8038, 35)
  line L11 (2.3, 18.75) -> (32.7, 18.75) projected
  line L12 (32.7, 19.75) -> (32.7, 18.75) projected
  line L13 (2.3, 18.75) -> (32.7, 18.75)
  line L14 (32.7, 18.75) -> (32.7, 19.05)
  line L15 (32.7, 19.05) -> (2.3, 19.05)
  line L16 (2.3, 19.05) -> (2.3, 18.75)
  point P0 (0, 0)
  dimension "d164" = 1.5
  dimension "d165" = 30
  dimension "d166" = 1.5
  dimension "d167" = 30
  dimension "d168" = 0.3
extrude "Extrusion23" cut sketch "Sketch23" against normal blind 28
sketch "Sketch24" plane through (0, 28, 0) normal (0, 1, 0) x (1, 0, 0)
  line L0 (1.5, 31.134) -> (5.5981, 33.5) projected
  line L1 (5.5981, 33.5) -> (7.0981, 33.5)
  line L2 (29.4019, 33.5) -> (5.5981, 33.5) projected
  line L3 (7.0981, 33.5) -> (1.5, 30.2679)
  line L4 (1.5, 21.2498) -> (1.5, 31.134) projected
  line L5 (1.5, 30.2679) -> (1.5, 31.134)
  line L6 (1.5, 31.134) -> (5.5981, 33.5)
  line L7 (29.4019, 33.5) -> (33.5, 31.134) projected
  line L8 (29.4019, 33.5) -> (27.9019, 33.5)
  line L9 (27.9019, 33.5) -> (33.5, 30.2679)
  line L10 (33.5, 31.134) -> (33.5, 21.75) projected
  line L11 (33.5, 30.2679) -> (33.5, 31.134)
  line L12 (33.5, 31.134) -> (29.4019, 33.5)
  point P0 (0, 0)
  dimension "d171" = 1.5
  dimension "d172" = 30
  dimension "d173" = 1.5
  dimension "d174" = 30
extrude "Extrusion24" add sketch "Sketch24" against normal blind 25.8
properties part number "Sarten"
